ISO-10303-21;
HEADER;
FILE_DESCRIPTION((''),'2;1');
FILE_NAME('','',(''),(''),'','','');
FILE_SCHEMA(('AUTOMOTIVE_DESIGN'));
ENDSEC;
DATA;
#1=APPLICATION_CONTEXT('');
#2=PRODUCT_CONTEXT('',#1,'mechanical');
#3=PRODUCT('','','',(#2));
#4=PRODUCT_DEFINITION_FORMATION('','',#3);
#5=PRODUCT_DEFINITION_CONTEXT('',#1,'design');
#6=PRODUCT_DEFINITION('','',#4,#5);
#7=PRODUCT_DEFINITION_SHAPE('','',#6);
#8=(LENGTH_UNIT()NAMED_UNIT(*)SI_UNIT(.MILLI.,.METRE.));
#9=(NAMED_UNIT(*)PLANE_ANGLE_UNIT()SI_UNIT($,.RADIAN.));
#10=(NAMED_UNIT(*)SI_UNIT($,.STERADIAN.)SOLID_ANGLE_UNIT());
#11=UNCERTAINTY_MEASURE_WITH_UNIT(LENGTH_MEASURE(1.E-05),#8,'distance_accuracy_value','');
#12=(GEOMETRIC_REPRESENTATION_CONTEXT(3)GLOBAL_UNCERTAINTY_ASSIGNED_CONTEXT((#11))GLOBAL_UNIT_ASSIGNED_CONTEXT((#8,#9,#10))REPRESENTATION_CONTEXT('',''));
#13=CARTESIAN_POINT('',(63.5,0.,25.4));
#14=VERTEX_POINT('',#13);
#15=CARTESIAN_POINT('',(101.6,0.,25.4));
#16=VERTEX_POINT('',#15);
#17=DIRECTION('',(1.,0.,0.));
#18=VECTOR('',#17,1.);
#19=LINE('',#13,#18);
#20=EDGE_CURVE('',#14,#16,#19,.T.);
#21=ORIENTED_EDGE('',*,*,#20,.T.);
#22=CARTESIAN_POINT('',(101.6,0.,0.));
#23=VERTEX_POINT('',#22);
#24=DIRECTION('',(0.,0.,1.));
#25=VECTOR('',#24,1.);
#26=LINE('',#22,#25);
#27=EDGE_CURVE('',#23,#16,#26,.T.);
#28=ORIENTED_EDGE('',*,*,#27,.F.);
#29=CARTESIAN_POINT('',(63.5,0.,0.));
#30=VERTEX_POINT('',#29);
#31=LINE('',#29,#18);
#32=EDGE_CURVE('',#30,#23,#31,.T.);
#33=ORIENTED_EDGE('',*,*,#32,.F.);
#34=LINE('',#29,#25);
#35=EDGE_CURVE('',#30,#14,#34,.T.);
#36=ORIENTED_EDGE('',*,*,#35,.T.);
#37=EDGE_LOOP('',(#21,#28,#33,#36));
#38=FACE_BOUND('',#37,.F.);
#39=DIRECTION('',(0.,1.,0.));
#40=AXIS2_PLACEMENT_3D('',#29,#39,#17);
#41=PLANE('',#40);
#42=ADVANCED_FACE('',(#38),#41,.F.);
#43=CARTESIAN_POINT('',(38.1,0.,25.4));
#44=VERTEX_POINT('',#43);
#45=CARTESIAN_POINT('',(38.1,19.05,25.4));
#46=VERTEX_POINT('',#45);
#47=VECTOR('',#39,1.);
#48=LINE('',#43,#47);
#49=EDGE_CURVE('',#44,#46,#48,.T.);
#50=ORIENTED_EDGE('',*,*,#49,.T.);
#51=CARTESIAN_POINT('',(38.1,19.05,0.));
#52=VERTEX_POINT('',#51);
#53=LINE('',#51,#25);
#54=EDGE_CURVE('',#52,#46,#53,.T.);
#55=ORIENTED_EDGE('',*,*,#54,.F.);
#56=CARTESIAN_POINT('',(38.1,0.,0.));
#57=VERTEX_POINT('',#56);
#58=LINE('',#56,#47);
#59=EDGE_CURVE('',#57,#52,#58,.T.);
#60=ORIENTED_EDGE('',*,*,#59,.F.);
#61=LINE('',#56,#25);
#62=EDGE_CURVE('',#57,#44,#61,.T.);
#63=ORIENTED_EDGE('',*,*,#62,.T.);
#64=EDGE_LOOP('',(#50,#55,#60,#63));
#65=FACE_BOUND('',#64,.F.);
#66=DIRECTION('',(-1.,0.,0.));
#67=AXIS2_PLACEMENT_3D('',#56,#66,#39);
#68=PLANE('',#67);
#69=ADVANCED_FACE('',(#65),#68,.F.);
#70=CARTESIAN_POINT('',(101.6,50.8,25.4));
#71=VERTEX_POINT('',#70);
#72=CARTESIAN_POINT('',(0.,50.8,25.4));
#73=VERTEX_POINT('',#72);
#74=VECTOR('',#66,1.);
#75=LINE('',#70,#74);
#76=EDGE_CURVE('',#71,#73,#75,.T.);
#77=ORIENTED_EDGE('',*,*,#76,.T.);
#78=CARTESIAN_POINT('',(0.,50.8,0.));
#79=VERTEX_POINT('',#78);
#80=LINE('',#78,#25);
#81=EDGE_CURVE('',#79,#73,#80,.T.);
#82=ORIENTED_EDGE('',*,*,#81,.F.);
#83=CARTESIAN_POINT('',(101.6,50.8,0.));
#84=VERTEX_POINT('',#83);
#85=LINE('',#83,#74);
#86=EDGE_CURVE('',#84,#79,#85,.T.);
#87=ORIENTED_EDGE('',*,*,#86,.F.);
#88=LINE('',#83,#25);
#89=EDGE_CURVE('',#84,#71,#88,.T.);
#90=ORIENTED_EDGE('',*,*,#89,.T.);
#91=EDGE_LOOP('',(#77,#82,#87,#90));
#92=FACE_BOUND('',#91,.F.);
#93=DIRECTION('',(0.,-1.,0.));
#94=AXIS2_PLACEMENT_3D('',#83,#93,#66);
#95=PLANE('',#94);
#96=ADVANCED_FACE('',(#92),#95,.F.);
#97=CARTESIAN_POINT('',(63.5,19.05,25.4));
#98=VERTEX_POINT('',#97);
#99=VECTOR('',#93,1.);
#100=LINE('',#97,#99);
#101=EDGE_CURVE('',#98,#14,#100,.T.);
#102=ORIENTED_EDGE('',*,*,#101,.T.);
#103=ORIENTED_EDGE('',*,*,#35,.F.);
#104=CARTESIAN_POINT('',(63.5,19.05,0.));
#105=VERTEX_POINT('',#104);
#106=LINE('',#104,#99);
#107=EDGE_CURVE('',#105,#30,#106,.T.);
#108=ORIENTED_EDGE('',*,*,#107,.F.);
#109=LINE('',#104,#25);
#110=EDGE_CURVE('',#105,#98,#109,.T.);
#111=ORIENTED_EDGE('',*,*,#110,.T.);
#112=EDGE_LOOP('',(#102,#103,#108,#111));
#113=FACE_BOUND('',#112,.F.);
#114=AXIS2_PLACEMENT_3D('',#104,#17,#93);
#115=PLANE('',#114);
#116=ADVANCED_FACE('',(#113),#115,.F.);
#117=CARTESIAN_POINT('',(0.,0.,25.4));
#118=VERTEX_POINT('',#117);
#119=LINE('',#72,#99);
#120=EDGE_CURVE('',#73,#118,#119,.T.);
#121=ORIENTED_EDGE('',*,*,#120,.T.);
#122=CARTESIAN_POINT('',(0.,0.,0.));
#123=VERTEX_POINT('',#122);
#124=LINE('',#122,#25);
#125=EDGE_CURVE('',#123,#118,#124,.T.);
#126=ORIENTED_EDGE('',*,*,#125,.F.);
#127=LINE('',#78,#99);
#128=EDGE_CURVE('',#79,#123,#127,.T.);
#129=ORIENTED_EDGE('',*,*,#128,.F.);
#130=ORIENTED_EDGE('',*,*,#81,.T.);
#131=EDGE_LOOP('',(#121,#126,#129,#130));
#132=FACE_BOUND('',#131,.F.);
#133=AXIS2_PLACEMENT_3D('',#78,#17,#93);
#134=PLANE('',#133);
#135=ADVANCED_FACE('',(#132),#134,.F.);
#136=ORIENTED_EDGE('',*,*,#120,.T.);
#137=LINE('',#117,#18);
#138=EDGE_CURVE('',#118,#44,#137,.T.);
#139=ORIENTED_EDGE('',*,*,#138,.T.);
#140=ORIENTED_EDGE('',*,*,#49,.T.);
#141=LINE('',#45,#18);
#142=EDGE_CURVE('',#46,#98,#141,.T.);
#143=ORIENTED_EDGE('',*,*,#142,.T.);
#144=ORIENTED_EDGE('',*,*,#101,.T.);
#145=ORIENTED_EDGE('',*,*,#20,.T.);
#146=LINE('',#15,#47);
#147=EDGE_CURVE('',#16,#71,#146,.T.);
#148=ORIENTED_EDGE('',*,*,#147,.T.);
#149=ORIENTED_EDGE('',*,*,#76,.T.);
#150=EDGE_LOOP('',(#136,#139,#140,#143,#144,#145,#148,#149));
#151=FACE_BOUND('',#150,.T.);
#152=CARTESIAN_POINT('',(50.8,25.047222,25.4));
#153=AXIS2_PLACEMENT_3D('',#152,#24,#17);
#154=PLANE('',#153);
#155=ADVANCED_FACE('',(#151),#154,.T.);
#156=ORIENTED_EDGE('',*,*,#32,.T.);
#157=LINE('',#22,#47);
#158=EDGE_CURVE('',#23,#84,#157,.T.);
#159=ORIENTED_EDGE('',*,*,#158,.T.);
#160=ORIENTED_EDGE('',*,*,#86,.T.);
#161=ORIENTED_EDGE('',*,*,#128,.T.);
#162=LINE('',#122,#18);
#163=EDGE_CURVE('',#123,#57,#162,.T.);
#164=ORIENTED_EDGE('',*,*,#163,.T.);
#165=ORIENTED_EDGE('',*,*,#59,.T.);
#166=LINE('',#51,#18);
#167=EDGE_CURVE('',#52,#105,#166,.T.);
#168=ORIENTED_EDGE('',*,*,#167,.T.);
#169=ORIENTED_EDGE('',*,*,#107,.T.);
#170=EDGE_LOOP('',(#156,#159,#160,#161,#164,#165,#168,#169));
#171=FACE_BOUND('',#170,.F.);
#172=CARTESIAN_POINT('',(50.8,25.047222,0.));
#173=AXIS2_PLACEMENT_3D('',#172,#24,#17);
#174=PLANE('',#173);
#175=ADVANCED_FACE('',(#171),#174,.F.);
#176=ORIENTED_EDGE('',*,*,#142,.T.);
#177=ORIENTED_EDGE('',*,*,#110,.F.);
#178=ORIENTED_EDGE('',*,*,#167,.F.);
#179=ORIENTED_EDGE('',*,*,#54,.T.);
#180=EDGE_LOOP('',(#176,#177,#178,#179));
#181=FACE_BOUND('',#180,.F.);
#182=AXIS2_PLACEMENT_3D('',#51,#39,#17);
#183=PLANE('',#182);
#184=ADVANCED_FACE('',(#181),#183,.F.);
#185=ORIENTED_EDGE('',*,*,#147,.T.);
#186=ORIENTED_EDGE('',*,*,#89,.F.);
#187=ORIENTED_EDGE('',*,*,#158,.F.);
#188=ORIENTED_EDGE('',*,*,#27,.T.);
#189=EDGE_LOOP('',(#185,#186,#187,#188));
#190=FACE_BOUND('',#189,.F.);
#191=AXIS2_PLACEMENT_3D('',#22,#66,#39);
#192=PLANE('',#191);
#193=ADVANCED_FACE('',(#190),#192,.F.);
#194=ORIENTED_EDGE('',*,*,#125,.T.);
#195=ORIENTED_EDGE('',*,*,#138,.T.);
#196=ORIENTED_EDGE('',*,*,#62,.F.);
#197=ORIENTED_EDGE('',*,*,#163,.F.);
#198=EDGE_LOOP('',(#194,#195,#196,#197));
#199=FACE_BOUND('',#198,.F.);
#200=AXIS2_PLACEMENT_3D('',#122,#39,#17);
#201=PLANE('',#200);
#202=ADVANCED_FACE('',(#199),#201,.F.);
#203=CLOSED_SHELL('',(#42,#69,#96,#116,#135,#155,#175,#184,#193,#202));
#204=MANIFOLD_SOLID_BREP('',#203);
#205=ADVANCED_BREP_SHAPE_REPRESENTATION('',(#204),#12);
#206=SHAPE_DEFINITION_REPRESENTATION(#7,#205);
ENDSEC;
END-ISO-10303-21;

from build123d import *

# Parameters (mm, degrees)
F1_DEPTH = 25.4


# Not quite as in the source:
# - the program builds the solid bodies; features that only make, move or delete a surface that nothing else refers to are left out


with BuildPart() as f1:
    # F0 (on Top) → F1 (new body)
    with BuildSketch(Plane.XY):
        Polygon((0, 50.8), (0, 0), (38.1, 0), (38.1, 19.05), (63.5, 19.05), (63.5, 0), (101.6, 0), (101.6, 50.8), align=None)
    extrude(amount=F1_DEPTH)


solid = f1.part
